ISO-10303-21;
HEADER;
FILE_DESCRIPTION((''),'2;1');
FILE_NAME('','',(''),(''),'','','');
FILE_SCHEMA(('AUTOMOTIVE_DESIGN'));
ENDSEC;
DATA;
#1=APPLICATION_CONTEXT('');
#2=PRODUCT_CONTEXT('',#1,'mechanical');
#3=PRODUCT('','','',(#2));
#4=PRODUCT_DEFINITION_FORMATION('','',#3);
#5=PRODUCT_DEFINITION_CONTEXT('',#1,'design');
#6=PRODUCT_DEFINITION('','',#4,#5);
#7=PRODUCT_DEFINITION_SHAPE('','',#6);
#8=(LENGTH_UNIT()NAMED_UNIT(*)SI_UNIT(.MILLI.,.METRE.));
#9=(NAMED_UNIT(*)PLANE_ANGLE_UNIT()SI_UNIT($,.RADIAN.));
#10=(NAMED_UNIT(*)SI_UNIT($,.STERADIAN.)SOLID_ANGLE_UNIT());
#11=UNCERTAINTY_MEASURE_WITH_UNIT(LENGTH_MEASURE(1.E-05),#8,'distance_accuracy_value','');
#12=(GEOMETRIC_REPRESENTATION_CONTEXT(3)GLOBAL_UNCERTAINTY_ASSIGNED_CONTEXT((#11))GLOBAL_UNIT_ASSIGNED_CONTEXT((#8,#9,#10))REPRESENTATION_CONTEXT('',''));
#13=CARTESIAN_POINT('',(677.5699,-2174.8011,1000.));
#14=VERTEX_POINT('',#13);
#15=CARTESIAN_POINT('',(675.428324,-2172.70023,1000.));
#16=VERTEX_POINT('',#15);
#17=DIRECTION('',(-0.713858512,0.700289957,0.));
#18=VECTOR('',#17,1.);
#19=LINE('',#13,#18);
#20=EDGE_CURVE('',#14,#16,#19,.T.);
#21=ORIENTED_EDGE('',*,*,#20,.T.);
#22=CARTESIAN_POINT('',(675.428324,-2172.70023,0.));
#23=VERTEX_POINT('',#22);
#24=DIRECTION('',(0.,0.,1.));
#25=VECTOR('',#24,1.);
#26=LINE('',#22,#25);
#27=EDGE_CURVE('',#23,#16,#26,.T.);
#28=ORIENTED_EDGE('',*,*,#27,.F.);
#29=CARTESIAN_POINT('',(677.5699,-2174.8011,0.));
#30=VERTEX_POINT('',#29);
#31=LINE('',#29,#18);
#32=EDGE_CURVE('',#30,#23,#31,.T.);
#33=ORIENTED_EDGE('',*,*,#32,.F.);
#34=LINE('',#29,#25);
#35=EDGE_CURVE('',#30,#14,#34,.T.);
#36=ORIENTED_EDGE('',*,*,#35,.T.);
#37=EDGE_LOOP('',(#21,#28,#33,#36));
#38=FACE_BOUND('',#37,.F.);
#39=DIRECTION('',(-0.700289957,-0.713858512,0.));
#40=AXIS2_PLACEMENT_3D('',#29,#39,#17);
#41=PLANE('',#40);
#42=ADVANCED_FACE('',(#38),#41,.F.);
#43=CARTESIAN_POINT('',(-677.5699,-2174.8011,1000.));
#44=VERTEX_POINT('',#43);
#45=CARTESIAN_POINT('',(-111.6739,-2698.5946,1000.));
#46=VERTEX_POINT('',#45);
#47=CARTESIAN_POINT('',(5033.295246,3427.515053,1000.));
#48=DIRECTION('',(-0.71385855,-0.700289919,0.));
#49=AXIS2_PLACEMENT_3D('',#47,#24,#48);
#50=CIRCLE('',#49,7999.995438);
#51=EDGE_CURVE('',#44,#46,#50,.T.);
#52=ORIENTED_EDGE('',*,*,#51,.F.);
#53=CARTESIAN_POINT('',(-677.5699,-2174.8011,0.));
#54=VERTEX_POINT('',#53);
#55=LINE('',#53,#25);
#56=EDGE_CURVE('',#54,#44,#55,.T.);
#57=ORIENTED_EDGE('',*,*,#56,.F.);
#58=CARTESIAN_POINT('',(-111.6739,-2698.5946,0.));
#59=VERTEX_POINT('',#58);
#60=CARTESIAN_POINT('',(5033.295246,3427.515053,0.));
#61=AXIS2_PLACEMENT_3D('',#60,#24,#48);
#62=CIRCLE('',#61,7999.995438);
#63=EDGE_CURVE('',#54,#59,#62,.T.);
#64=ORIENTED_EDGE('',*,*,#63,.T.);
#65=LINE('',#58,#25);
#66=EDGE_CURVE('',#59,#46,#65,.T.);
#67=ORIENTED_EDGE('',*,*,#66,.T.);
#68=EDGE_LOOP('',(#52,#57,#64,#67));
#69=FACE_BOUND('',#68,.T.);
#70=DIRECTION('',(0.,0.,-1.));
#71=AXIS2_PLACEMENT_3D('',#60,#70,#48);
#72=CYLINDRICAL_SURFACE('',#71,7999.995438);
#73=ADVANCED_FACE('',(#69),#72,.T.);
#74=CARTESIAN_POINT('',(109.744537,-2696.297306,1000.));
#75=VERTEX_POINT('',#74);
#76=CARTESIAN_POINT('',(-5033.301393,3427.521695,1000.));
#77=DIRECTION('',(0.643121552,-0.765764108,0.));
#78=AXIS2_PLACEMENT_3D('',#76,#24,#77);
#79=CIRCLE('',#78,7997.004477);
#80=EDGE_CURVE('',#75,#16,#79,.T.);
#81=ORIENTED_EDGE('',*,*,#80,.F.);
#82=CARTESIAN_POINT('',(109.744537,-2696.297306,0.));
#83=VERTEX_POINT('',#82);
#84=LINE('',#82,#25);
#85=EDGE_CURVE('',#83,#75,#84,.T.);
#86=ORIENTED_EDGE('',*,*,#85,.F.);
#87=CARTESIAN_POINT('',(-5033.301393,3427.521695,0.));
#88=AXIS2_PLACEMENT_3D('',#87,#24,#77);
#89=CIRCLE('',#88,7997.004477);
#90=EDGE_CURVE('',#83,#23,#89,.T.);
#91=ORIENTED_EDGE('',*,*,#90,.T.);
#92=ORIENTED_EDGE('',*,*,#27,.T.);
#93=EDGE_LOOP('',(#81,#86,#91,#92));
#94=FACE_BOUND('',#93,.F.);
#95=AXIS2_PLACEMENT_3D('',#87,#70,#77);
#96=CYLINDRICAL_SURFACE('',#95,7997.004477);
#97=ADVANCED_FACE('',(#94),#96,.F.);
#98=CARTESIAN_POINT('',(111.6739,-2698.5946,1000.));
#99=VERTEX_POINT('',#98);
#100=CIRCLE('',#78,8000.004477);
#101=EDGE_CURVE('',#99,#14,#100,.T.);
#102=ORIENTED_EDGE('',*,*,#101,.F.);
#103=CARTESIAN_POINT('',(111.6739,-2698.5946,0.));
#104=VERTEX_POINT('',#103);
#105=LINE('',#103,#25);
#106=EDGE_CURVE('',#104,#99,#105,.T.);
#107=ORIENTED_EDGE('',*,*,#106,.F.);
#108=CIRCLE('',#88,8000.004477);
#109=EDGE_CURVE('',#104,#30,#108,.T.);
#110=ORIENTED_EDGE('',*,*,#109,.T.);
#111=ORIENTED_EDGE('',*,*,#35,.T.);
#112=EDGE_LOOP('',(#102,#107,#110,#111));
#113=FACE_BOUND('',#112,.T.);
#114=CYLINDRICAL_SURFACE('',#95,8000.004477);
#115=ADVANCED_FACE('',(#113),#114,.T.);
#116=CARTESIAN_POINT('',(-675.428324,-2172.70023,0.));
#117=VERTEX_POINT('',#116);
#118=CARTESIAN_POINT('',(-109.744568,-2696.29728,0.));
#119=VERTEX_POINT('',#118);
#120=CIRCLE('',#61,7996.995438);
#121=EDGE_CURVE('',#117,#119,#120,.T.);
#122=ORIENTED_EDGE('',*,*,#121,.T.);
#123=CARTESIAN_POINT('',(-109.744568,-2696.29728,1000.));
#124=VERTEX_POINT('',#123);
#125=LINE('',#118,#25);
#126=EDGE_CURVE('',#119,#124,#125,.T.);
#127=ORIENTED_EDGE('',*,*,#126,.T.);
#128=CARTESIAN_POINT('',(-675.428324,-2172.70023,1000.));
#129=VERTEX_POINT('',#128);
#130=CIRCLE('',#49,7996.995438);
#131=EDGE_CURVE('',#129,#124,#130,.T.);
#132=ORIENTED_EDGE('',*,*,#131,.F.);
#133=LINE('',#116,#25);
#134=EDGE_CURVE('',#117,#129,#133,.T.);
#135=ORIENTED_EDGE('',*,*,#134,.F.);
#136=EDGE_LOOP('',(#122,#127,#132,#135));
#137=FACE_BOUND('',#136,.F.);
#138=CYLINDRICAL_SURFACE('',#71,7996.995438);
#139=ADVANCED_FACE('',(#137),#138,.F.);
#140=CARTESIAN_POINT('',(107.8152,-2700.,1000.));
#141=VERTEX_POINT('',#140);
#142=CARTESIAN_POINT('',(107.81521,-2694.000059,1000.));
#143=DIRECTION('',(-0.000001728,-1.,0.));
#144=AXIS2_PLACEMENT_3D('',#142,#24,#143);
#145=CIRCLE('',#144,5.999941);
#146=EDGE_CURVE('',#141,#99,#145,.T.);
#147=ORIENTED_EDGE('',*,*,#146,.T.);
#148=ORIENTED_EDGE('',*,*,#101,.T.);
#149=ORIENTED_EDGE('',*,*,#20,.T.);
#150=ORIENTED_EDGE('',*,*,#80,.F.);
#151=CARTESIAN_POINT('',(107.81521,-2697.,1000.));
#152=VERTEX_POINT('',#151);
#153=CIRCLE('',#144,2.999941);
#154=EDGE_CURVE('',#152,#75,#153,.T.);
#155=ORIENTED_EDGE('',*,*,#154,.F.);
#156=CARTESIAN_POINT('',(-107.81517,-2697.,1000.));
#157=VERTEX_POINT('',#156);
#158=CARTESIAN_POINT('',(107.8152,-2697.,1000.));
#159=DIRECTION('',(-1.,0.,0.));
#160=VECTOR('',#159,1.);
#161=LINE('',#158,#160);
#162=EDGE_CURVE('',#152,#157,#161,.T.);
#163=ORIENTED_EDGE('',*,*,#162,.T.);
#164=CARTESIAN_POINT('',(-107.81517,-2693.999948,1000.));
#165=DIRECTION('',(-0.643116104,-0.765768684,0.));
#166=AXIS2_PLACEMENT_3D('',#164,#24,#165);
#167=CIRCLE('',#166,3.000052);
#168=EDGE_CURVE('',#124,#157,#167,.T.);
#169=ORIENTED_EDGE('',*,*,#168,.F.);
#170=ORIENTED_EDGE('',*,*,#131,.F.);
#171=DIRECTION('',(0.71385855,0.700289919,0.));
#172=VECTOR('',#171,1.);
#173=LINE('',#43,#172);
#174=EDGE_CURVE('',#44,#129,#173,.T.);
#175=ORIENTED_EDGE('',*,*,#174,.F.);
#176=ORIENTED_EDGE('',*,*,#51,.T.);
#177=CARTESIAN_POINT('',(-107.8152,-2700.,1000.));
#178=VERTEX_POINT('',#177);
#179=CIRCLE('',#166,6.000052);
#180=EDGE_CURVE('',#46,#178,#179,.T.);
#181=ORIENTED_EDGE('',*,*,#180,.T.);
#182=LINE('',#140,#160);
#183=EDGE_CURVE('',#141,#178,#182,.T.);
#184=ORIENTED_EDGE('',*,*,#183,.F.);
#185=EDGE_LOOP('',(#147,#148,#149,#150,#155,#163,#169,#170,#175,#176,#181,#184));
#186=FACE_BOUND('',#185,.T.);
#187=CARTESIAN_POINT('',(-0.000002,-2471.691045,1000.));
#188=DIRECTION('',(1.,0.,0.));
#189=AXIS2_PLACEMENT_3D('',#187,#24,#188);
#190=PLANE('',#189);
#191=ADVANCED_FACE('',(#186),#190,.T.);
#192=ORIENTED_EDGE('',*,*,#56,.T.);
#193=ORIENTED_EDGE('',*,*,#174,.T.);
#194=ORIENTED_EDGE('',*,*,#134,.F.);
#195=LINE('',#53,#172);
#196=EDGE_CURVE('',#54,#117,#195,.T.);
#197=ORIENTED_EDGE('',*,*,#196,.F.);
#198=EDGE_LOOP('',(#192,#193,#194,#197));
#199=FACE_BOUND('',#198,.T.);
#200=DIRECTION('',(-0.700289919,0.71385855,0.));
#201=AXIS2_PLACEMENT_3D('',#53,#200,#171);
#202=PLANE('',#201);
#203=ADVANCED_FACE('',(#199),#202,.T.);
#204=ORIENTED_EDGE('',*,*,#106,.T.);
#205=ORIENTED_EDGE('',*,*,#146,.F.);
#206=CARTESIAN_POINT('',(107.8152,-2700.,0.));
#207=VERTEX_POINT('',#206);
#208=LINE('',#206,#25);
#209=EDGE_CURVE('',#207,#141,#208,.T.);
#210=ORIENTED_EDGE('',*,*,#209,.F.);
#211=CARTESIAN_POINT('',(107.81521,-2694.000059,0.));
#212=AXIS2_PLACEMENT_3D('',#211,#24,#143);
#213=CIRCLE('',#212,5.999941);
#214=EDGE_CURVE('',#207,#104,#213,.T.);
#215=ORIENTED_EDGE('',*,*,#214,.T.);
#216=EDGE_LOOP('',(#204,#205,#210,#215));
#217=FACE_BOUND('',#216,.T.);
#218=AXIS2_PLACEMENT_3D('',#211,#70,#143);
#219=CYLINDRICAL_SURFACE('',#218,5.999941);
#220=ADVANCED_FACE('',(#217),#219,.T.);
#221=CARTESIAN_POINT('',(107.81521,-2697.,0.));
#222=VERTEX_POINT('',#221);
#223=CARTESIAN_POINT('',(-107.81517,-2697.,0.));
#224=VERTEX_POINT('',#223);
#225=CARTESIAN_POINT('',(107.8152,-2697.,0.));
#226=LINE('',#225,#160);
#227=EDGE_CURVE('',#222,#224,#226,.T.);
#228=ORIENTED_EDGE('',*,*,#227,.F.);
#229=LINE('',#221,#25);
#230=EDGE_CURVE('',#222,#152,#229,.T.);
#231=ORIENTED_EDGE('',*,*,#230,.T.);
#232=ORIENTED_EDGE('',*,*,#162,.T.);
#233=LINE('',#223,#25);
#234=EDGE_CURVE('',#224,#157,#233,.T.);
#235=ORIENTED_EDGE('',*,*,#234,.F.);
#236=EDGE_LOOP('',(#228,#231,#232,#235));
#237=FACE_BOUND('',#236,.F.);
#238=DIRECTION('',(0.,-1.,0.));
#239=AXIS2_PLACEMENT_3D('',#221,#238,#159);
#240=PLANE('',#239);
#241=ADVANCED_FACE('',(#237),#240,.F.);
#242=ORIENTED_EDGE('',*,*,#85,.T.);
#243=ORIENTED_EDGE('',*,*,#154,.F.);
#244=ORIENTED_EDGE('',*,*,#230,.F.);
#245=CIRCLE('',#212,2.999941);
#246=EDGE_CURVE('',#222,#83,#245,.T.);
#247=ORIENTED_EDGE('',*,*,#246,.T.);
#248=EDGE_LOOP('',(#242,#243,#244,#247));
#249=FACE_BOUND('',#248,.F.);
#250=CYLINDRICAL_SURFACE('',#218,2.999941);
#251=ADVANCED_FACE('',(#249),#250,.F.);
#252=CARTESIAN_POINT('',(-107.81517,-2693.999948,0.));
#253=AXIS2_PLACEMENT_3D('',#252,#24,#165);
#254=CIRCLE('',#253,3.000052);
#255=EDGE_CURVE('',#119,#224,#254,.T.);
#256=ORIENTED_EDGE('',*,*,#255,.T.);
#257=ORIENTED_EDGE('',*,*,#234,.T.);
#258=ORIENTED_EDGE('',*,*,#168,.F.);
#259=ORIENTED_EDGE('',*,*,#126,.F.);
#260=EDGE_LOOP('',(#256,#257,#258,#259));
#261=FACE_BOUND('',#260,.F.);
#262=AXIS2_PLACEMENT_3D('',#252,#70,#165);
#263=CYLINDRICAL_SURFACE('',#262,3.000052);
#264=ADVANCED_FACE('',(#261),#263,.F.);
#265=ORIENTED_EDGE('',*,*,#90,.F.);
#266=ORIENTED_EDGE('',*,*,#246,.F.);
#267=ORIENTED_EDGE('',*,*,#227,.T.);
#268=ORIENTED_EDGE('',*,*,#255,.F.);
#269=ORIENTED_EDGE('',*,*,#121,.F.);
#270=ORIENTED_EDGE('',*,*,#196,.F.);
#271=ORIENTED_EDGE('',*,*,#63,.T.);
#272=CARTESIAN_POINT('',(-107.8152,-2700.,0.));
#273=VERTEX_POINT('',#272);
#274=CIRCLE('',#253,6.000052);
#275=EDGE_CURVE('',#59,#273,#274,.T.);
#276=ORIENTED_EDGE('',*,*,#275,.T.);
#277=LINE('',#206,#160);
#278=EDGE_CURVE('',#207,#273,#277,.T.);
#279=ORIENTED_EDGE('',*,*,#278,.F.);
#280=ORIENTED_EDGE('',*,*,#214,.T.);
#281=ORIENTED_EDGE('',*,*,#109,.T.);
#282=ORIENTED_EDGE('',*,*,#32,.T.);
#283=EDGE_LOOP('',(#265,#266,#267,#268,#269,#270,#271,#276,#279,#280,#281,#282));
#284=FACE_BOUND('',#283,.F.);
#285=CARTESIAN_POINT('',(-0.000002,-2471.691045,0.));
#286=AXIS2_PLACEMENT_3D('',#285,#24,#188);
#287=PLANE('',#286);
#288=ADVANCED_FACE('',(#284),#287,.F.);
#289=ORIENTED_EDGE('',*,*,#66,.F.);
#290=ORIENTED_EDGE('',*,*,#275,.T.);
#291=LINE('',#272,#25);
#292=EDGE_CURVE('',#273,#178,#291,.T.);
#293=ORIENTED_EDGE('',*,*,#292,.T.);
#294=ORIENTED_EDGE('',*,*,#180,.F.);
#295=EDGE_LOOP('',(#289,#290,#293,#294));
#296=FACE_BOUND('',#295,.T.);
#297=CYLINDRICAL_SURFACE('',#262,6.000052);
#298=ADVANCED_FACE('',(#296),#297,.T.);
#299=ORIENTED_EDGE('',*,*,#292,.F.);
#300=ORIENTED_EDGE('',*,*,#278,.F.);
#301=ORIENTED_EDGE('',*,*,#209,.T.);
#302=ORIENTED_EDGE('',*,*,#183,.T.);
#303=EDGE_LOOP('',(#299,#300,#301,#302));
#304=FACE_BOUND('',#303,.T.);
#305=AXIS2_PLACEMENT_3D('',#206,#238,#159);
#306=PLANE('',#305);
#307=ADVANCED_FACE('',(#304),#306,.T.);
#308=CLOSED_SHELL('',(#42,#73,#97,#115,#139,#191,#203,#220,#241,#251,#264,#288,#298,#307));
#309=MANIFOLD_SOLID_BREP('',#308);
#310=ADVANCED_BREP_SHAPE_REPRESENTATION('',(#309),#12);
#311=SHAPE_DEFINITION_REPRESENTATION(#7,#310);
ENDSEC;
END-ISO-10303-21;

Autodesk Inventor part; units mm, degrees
ref_plane "YZ Plane" through (0, 0, 0) normal (1, 0, 0) x (0, 1, 0)
ref_plane "XZ Plane" through (0, 0, 0) normal (0, 1, 0) x (-1, 0, 0)
ref_plane "XY Plane" through (0, 0, 0) normal (0, 0, 1) x (1, 0, 0)
sketch "Sketch1" plane through (0, 0, 0) normal (0, 0, 1) x (1, 0, 0)
  line L0 (-750, 0) -> (750, 0) construction
  line L1 (750, 0) -> (750, -2100) construction
  line L2 (750, -2100) -> (110, -2700) construction
  line L3 (107.8152, -2700) -> (-107.8152, -2700)
  line L4 (-110, -2700) -> (-750, -2100) construction
  line L5 (-750, -2100) -> (-750, 0) construction
  arc A0 (745.2369, 0.4471) -> (-745.2369, 0.4471) centre (0, -7964.7662) ccw construction
  arc A1 (-750.6265, -4.7429) -> (-777.5832, -235) centre (7180.7944, -1050) ccw construction
  arc A2 (-777.5832, -235) -> (-750.1285, -2099.0286) centre (7180.7944, -1050) ccw construction
  arc A3 (750.1285, -2099.0286) -> (777.5832, -235) centre (-7180.7944, -1050) ccw construction
  arc A4 (777.5832, -235) -> (750.6265, -4.7429) centre (-7180.7944, -1050) ccw construction
  line L6 (-777.5832, -235) -> (777.5832, -235) construction
  arc A5 (-749.3229, -2100.7083) -> (-677.5699, -2174.8011) centre (5033.2984, 3427.5183) ccw construction
  line L7 (-750, -2100) -> (750, -2100) construction
  line L8 (-547.1729, -2035.7109) -> (-801.0834, -2306.5488) construction
  arc A6 (-677.5699, -2174.8011) -> (-111.6739, -2698.5946) centre (5033.2984, 3427.5183) ccw
  arc A7 (-745.2369, 0.4471) -> (-750.6265, -4.7429) centre (-744.6779, -5.5268) ccw construction
  arc A8 (750.6265, -4.7429) -> (745.2369, 0.4471) centre (744.6779, -5.5268) ccw construction
  arc A9 (-750.1285, -2099.0286) -> (-749.3229, -2100.7083) centre (-747.1545, -2098.6352) ccw construction
  arc A10 (111.6739, -2698.5946) -> (677.5699, -2174.8011) centre (-5033.2984, 3427.5183) ccw
  line L9 (553.8195, -2042.8006) -> (794.4368, -2299.4591) construction
  arc A11 (677.5699, -2174.8011) -> (749.3229, -2100.7083) centre (-5033.2984, 3427.5183) ccw construction
  arc A12 (749.3229, -2100.7083) -> (750.1285, -2099.0286) centre (747.1545, -2098.6352) ccw construction
  arc A13 (-111.6739, -2698.5946) -> (-107.8152, -2700) centre (-107.8152, -2694) ccw
  arc A14 (107.8152, -2700) -> (111.6739, -2698.5946) centre (107.8152, -2694) ccw
  point P0 (0, 0)
  point P1 (0, 0)
  point P2 (0, 0)
  point P3 (0, -2700)
  point P4 (-674.1281, -2171.1299)
  point P5 (674.1281, -2171.1299)
  dimension "d19" = 1500
  dimension "d20" = 2100
  dimension "d21" = 220
  dimension "d22" = 2700
  dimension "d23" = 8000
  dimension "d24" = 8000
  dimension "d25" = 8000
  dimension "d26" = 235
  dimension "d27" = 8000
  dimension "d28" = 104
  dimension "d29" = 6
  dimension "d30" = 3
  dimension "d31" = 8000
  dimension "d32" = 104
  dimension "d33" = 6
contour flange "Contour Flange1" sketch "Sketch1" thickness 3 bend radius 3 width 1000 along (0, 0, 1) mid plane no both sides no wall seen from (-400.9365, -2443.52, 0) lies toward (0.6792794, 0.7338798, 0) curves A6 A13 L3 A14 A10
bend "Bend1"
corner "Corner1"
equation "\"d19\" = Бак_ширина_общая"
equation "\"d20\" = Бак_высота_до_конуса"
equation "\"d21\" = Бак_брюхо_ширина_полки"
equation "\"d22\" = Бак_высота_общая"
equation "\"d23\" = Бак_радиус_стенок_общий"
equation "\"d24\" = Бак_радиус_стенок_общий"
equation "\"d25\" = Бак_радиус_стенок_общий"
equation "\"d26\" = Бак_спина_длина_фланцев"
equation "\"d27\" = Бак_радиус_стенок_общий"
equation "\"d28\" = Бак_борт_длина_фланца"
equation "\"d29\" = d41 + d42"
equation "\"d30\" = d41"
equation "\"d31\" = Бак_радиус_стенок_общий"
equation "\"d32\" = Бак_борт_длина_фланца"
equation "\"d33\" = Thickness + BendRadius"
equation "\"d7\" = Thickness"
equation "\"d8\" = BendReliefWidth"
equation "\"d9\" = BendReliefDepth"
equation "\"d10\" = MinimumRemnant"
equation "\"d11\" = TransitionRadius"
equation "\"d13\" = BendRadius"
equation "\"d15\" = CornerReliefSize"
equation "\"d16\" = GapSize"
equation "\"d17\" = JacobiRadiusSize"
equation "\"BendRadius\" = Thickness"
equation "\"BendReliefWidth\" = Thickness"
equation "\"BendReliefDepth\" = 0.5 * Thickness"
equation "\"CornerReliefSize\" = 4 * Thickness"
equation "\"MinimumRemnant\" = 2 * Thickness"
equation "\"TransitionRadius\" = BendRadius"
equation "\"JacobiRadiusSize\" = BendRadius"
equation "\"GapSize\" = Thickness"
equation "\"d42\" = d41"
equation "\"Бак_ширина_общая\" = 1500"
equation "\"Бак_высота_до_конуса\" = 2100"
equation "\"Бак_брюхо_ширина_полки\" = 220"
equation "\"Бак_радиус_стенок_общий\" = 8000"
equation "\"Бак_спина_длина_фланцев\" = 235"
equation "\"d41\" = 3"
equation "\"Thickness\" = 3"
equation "\"Бак_высота_общая\" = 2700"
equation "\"Бак_борт_длина_фланца\" = 104"
properties part number "МОО 030 лист брюхо 1" material "Stainless Steel"
